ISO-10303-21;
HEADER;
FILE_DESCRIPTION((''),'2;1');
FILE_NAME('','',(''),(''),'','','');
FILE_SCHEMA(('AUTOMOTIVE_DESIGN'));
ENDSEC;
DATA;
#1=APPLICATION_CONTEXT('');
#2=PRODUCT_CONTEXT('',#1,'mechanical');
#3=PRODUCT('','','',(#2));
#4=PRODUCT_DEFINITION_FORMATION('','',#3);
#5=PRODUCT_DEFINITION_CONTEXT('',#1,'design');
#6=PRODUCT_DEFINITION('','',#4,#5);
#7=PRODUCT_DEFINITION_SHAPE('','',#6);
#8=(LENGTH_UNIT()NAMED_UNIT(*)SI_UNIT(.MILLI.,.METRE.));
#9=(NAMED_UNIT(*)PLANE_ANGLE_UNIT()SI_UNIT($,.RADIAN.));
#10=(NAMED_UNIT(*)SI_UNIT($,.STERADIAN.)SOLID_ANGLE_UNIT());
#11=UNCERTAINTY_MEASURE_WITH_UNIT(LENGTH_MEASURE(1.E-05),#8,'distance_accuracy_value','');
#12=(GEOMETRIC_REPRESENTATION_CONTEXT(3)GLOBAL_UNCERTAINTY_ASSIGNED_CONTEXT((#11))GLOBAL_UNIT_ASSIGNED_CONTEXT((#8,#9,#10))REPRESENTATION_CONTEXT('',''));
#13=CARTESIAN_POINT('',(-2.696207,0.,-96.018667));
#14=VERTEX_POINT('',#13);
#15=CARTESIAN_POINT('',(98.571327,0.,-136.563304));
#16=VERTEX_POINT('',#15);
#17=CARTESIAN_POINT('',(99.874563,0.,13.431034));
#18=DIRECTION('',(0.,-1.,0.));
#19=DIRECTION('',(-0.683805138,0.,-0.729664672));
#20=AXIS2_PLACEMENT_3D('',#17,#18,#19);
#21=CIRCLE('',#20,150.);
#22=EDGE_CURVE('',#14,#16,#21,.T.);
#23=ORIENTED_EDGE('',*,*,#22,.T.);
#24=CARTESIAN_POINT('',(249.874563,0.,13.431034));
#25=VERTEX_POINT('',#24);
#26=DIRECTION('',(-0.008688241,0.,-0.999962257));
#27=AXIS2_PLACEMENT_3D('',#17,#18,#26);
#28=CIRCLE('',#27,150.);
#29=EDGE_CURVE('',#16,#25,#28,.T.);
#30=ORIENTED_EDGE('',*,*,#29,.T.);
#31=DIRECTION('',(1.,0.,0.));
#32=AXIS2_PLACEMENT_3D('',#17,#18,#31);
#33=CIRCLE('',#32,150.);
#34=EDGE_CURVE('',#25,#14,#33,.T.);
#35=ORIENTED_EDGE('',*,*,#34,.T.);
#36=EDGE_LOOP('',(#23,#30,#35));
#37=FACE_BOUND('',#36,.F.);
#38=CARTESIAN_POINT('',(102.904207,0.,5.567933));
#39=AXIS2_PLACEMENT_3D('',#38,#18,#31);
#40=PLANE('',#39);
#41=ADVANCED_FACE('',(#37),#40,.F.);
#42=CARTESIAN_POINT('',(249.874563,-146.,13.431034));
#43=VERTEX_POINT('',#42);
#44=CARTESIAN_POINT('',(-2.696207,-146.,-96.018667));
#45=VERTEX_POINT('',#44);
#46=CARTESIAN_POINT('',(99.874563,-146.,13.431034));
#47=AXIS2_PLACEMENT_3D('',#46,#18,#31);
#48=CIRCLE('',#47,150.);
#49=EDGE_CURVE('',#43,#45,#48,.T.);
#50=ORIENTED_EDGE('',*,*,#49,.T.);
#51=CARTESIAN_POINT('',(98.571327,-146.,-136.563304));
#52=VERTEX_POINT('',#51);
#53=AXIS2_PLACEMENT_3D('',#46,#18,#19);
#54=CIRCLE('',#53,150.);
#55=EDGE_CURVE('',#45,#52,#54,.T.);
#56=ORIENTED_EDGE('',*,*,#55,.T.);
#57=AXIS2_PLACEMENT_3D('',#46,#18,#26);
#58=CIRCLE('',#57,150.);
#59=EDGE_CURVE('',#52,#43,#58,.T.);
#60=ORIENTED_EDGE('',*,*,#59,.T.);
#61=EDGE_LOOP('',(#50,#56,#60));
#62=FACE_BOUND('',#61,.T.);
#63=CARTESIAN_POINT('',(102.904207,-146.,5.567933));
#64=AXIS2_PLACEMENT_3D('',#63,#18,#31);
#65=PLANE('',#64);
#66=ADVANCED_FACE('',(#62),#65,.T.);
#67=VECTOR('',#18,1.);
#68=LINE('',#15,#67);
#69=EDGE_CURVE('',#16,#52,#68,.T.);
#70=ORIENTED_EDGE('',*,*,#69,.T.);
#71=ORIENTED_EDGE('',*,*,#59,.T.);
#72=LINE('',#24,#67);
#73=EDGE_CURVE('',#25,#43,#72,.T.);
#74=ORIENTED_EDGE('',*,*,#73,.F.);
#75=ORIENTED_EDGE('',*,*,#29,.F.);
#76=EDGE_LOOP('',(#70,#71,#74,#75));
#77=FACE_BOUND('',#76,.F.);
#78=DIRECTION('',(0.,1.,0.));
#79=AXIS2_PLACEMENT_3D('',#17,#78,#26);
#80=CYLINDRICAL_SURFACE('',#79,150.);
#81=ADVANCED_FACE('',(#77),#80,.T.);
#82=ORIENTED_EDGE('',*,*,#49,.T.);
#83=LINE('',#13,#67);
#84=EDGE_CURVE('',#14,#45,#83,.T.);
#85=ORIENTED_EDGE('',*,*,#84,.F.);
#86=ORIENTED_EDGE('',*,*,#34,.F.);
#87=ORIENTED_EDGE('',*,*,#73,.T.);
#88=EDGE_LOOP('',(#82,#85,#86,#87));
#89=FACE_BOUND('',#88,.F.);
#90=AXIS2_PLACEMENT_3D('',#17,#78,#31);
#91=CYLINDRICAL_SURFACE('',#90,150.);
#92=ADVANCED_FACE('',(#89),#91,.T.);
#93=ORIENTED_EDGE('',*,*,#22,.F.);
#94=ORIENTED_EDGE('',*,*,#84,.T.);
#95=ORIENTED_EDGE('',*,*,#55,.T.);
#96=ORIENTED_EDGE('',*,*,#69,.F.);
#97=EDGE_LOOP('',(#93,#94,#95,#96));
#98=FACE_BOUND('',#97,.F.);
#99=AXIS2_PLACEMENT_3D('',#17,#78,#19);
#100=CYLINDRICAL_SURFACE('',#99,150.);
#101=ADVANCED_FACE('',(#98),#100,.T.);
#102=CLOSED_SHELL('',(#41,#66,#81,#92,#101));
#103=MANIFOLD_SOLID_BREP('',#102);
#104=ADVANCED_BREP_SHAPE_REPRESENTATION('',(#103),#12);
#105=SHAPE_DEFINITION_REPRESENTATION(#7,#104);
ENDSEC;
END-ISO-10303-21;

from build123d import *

# Parameters (mm, degrees)
F1_DEPTH = 146


with BuildPart() as f1:
    # F0 (on Front) → F1 (new body)
    with BuildSketch(Plane.XZ):
        with BuildLine():
            ThreePointArc((98.5713273934, -136.5633044432), (205.4788119459, -93.094750199), (249.8745634841, 13.4310340356))
            ThreePointArc((249.8745634841, 13.4310340356), (40.2323620084, 151.0639073005), (-2.6962072245, -96.0186667235))
            ThreePointArc((-2.6962072245, -96.0186667235), (44.121364167, -125.8226221674), (98.5713273934, -136.5633044432))
        make_face()
    extrude(amount=F1_DEPTH)


solid = f1.part
